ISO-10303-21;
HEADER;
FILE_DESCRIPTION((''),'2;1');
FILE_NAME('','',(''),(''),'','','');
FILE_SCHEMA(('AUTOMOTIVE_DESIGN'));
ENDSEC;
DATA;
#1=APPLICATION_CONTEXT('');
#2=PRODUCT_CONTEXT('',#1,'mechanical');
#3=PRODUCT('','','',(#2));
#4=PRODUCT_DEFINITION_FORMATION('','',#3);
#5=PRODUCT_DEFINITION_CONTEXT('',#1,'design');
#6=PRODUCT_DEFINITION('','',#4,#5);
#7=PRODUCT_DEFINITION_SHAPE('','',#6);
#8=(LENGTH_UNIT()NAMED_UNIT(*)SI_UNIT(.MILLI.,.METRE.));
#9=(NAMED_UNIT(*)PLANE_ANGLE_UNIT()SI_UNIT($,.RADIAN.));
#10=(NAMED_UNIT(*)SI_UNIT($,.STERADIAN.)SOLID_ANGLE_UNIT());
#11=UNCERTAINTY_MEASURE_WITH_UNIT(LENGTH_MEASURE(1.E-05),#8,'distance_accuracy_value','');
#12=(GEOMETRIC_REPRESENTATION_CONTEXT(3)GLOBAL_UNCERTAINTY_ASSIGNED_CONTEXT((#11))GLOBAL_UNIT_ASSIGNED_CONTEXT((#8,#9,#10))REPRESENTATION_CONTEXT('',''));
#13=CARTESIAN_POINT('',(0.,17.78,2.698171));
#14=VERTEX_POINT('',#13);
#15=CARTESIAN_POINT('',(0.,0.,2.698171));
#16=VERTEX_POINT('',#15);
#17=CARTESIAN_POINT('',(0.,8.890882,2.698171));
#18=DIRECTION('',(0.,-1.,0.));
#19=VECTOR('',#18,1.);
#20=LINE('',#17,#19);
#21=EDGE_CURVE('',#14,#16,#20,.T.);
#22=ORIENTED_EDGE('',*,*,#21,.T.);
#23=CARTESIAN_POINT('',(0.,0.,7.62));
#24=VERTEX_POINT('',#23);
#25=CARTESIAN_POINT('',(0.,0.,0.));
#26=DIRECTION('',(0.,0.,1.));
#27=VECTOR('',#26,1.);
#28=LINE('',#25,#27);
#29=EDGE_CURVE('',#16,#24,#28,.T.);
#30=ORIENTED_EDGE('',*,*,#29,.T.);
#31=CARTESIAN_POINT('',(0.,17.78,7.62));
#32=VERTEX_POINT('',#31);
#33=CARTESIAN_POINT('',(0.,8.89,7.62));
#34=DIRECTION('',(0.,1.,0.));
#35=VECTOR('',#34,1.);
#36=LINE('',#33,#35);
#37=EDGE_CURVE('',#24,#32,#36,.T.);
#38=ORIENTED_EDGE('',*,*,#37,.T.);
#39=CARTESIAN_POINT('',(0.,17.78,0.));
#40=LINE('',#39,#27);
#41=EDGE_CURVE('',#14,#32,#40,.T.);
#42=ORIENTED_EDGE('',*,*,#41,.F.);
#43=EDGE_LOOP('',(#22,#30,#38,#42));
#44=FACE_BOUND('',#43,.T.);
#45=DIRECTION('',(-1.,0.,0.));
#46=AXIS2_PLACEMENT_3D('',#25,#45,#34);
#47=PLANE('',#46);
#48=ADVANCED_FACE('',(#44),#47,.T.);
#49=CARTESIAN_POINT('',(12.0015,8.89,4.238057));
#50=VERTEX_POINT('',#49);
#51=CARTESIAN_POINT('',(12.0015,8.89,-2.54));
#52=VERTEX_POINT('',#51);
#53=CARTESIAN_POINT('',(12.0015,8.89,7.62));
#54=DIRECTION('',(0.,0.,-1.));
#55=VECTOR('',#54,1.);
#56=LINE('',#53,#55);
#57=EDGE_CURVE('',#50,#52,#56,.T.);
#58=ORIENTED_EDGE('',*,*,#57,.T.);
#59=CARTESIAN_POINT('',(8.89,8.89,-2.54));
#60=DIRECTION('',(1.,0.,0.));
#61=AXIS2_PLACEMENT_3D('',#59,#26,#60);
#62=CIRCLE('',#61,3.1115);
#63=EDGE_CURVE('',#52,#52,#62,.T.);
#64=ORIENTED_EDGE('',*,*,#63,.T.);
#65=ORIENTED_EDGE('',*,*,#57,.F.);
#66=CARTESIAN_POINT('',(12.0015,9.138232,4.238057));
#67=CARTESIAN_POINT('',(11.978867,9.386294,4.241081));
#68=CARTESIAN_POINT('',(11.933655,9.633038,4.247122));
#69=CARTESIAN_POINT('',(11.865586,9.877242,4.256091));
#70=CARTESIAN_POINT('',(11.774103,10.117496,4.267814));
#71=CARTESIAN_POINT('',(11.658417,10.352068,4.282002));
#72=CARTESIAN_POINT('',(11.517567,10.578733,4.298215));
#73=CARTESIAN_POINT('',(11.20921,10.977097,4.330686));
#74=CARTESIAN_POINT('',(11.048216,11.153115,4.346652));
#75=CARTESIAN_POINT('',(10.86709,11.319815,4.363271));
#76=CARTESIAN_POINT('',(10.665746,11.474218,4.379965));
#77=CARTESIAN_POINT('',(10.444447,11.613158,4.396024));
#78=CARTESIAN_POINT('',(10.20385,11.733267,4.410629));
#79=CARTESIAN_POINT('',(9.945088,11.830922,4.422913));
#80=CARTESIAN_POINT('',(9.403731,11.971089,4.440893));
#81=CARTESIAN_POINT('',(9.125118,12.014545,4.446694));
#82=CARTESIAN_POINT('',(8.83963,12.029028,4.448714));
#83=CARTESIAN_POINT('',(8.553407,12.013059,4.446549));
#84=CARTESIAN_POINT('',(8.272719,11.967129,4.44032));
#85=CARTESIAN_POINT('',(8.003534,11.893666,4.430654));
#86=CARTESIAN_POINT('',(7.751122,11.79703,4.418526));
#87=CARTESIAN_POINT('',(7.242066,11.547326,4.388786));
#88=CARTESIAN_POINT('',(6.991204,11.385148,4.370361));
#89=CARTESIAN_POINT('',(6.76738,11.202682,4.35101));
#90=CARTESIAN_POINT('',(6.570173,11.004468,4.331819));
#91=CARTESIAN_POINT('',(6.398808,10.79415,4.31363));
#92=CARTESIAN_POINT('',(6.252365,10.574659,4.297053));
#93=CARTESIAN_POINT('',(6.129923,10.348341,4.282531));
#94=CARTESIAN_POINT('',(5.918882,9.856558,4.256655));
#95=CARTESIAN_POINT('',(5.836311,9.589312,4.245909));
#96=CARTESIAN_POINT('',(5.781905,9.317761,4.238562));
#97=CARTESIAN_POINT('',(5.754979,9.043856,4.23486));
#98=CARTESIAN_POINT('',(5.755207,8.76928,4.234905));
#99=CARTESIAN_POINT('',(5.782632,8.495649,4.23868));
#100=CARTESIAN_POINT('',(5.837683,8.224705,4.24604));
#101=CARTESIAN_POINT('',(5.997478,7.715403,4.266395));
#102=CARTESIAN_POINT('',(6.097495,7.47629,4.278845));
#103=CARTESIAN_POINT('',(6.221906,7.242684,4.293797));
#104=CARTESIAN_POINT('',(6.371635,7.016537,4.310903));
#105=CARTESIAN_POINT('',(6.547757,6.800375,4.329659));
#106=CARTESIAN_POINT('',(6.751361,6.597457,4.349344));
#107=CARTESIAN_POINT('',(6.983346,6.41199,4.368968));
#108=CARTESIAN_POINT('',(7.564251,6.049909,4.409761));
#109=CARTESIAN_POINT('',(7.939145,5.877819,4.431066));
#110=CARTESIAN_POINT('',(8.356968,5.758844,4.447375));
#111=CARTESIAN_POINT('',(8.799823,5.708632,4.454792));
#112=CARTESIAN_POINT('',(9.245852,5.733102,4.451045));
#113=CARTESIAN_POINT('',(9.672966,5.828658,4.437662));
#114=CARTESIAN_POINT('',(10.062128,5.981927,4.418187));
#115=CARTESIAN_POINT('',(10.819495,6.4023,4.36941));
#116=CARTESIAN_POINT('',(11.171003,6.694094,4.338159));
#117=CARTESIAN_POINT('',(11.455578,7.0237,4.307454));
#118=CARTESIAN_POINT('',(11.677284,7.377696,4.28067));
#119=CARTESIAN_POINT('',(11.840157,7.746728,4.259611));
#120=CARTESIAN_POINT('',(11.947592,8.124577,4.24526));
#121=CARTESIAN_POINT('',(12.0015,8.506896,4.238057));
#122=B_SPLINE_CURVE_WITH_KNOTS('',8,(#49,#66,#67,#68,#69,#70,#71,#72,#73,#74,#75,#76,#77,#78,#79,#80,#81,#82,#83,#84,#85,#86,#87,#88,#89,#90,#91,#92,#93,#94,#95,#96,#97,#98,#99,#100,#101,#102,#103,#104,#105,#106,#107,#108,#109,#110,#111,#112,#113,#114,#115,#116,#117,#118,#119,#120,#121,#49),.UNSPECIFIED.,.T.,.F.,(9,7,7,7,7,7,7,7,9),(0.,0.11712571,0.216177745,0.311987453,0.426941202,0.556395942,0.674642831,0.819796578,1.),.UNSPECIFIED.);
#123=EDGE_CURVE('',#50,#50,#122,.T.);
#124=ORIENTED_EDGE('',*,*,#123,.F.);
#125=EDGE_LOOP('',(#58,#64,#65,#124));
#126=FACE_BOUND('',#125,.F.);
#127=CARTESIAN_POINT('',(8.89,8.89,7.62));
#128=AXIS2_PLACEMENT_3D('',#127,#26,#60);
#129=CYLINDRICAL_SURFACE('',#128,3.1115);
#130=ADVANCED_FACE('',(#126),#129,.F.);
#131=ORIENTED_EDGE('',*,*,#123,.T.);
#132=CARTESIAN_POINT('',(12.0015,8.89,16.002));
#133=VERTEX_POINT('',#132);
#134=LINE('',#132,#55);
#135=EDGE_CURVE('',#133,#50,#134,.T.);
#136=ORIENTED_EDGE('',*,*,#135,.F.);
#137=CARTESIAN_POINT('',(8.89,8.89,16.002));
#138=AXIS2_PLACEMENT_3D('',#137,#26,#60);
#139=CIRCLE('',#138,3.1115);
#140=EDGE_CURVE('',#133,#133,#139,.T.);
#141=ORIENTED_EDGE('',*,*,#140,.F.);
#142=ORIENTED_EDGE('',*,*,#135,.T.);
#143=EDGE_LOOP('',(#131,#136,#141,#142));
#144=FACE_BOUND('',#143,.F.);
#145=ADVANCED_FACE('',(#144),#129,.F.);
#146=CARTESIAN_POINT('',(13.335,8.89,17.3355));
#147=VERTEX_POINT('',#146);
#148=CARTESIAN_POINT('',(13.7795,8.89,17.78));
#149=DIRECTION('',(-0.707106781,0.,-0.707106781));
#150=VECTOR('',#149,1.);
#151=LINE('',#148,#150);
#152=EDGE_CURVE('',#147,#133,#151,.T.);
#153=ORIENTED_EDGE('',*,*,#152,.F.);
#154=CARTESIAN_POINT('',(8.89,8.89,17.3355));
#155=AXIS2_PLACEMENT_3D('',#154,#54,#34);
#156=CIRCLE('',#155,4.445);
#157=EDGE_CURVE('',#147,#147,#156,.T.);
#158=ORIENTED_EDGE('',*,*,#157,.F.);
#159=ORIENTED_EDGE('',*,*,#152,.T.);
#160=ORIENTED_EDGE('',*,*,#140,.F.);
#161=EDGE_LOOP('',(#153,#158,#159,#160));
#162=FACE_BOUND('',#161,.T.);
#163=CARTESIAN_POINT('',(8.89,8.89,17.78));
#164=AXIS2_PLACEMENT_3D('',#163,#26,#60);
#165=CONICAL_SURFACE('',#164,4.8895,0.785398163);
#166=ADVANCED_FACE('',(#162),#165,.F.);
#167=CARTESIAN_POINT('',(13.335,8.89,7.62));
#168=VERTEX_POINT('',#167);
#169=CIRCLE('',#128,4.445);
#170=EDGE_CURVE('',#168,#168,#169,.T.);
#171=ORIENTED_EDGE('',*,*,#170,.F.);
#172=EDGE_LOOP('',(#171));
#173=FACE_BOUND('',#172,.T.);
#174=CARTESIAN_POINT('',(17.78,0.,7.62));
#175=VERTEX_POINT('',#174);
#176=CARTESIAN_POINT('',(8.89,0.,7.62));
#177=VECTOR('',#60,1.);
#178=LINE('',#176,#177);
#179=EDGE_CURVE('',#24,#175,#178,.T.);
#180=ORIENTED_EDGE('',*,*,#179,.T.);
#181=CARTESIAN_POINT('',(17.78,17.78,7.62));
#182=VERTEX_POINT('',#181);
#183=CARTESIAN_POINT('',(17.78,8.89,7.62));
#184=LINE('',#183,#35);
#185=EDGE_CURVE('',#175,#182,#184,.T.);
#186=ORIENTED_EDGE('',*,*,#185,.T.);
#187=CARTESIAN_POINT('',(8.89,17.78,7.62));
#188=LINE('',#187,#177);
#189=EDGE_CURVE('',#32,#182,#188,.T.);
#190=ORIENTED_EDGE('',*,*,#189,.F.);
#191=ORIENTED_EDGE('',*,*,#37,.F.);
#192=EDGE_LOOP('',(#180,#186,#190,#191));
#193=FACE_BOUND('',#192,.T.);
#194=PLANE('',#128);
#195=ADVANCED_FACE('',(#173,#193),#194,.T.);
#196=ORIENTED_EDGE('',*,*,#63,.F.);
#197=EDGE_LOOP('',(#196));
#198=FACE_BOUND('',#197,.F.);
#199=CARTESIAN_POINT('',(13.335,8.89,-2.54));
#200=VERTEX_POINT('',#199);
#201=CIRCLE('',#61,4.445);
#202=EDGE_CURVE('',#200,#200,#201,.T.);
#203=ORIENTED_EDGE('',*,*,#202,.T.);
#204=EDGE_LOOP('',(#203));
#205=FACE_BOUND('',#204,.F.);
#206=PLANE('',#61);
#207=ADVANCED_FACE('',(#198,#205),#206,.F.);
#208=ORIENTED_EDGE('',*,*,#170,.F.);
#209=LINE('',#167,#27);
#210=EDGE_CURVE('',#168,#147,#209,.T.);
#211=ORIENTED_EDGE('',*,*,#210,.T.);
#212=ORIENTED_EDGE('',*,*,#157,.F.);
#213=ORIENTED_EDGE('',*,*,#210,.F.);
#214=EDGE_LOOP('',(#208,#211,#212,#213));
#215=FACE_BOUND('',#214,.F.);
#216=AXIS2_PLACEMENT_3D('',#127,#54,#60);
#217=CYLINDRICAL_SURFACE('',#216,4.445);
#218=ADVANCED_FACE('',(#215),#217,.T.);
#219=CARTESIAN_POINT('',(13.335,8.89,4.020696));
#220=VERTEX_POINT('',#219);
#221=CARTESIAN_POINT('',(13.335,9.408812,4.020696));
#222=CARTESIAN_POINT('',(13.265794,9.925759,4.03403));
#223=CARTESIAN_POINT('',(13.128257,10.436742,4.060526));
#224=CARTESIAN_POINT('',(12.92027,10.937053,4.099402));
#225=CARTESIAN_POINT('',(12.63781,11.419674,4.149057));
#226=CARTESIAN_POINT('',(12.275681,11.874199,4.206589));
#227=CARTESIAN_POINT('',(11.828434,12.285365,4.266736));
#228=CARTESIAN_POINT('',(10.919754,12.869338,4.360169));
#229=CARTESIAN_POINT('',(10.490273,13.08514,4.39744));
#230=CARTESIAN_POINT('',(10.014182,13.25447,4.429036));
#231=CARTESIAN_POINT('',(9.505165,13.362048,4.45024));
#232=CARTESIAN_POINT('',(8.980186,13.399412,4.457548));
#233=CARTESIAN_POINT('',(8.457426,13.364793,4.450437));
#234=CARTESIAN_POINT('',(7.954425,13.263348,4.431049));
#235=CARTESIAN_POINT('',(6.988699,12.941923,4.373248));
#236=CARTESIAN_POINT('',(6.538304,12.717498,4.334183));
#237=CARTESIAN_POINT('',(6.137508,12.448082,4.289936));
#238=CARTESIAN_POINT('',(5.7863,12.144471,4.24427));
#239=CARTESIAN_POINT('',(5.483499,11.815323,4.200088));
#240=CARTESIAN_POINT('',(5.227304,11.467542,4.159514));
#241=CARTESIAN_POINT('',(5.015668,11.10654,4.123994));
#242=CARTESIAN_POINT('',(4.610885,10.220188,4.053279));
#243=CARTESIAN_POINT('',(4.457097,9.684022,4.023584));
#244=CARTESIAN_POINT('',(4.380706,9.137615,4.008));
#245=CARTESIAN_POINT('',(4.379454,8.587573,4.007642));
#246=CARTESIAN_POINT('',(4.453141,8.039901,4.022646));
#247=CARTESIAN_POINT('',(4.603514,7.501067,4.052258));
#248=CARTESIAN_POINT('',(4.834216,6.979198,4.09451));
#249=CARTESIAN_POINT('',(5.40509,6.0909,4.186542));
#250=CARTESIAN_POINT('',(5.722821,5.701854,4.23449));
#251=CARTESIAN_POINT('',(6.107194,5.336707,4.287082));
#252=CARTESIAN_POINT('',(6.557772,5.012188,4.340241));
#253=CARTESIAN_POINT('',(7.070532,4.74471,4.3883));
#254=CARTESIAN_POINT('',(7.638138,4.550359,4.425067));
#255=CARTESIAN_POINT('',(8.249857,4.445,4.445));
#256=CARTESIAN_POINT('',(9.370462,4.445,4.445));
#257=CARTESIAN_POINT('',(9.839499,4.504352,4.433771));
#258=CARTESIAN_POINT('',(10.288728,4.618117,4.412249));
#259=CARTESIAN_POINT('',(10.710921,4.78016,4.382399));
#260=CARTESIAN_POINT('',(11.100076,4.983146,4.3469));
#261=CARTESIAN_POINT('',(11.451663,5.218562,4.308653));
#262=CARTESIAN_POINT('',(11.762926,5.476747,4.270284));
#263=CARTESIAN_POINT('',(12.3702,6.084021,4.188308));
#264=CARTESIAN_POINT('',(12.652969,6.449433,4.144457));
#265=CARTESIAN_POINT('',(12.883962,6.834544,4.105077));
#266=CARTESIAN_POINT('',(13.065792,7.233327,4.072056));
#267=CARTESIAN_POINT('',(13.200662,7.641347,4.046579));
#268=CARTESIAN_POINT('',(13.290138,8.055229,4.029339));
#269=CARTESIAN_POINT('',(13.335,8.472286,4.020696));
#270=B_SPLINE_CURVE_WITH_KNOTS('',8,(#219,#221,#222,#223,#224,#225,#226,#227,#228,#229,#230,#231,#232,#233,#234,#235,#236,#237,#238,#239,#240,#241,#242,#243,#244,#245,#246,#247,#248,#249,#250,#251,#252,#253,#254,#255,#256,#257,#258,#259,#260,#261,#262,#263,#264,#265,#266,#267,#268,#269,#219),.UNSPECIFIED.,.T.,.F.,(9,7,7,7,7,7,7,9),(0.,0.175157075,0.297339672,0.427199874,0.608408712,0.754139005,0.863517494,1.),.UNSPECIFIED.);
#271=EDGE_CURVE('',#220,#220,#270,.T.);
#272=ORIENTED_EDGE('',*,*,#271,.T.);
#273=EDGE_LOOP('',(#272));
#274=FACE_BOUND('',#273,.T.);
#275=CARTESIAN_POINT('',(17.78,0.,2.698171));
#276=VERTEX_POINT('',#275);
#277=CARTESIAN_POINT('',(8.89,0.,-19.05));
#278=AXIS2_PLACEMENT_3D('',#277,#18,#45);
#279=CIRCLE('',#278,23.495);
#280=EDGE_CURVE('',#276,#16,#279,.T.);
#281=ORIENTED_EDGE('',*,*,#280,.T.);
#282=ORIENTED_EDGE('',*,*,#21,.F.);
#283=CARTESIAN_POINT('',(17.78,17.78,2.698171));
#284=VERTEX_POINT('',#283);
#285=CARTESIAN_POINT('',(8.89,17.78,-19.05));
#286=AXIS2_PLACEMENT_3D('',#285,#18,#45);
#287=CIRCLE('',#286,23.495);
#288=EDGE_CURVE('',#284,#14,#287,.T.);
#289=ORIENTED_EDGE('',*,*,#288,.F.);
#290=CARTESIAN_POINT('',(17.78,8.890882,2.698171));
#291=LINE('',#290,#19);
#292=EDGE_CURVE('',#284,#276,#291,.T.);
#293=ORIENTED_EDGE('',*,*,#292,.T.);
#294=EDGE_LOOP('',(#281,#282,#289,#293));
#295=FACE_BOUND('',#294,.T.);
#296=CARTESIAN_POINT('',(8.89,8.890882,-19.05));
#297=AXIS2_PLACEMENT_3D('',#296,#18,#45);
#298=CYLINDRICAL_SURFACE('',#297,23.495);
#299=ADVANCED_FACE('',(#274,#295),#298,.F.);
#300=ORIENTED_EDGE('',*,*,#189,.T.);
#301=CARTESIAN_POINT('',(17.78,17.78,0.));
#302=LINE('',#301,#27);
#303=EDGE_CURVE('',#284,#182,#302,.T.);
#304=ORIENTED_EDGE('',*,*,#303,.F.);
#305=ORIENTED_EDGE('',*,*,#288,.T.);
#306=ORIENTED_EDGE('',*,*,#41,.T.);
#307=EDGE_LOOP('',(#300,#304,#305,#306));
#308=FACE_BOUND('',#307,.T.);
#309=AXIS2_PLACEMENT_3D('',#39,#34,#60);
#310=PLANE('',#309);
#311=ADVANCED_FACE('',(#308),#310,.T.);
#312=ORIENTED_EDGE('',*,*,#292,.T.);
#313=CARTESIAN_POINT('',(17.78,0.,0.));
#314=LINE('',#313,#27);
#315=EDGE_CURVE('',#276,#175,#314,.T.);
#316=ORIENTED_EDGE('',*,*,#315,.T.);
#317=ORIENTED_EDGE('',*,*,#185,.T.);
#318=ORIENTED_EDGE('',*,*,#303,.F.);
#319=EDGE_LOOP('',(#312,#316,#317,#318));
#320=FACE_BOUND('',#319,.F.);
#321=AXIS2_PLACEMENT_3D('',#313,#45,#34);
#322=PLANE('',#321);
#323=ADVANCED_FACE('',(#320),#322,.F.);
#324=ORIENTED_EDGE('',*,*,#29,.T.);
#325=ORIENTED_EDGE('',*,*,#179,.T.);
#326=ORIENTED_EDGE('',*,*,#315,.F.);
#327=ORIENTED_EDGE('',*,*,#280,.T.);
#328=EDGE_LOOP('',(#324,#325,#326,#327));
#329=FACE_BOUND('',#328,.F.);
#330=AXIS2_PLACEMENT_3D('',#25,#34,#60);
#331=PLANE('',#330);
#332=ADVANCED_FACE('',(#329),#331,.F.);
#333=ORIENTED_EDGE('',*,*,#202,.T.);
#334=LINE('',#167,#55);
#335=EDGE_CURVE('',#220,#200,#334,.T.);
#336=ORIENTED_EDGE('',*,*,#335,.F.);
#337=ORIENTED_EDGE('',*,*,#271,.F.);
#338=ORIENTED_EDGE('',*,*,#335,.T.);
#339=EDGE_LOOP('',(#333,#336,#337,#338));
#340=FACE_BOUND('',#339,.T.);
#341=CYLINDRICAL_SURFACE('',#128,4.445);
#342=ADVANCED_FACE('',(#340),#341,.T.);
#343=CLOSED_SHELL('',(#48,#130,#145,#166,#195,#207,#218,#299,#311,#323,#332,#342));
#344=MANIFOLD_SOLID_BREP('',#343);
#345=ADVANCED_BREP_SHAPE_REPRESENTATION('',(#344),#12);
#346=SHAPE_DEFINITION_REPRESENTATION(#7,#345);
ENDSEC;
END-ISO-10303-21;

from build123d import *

# Parameters (mm, degrees)
F0_W     = 17.78
F0_H     = 17.78
F1_DEPTH = 7.62
F3_W     = 5.08
F3_H     = 22.724437993
F5_R     = 4.445
F5_R_2   = 3.1115
F6_DEPTH = 10.16
F7_DEPTH = 25.4
F8_DEPTH = 10.16


# Not quite as in the source:
# - a fillet or chamfer that OpenCascade refuses, or shapes differently, is made with other operations: its cross-section is extruded or revolved along the edge and cut away or added


with BuildPart() as f1:
    # F0 (on Top) → F1 (new body)
    with BuildSketch(Plane.XY):
        with Locations((8.89, 8.89)):
            Rectangle(F0_W, F0_H)
    extrude(amount=F1_DEPTH)

    # F3 (on offset) → F4 (revolve, cut)
    with BuildSketch(Plane(origin=(0, 0, -19.05), x_dir=(1, 0, 0), z_dir=(0, 0, -1))):
        with Locations((-12.065, -8.8908823673)):
            Rectangle(F3_W, F3_H)
    revolve(axis=Axis((8.89, 12.1113763889, -19.05), (0, 1, 0)), mode=Mode.SUBTRACT)

    # F5 (on face) → F6 (join)
    with BuildSketch(Plane.XY.offset(7.62)):
        with Locations((8.89, 8.89)):
            Circle(F5_R)
        with Locations((8.89, 8.89)):
            Circle(F5_R_2, mode=Mode.SUBTRACT)
    extrude(amount=F6_DEPTH)

    # F7 (cut): a face of the model
    f7_faces = [f1.faces().sort_by_distance(p)[0] for p in [
        (8.89, 8.89, 7.62),
    ]]
    extrude(f7_faces, amount=-F7_DEPTH, mode=Mode.SUBTRACT)

    # F5 (on face) → F8 (join)
    with BuildSketch(Plane.XY.offset(7.62)):
        with Locations((8.89, 8.89)):
            Circle(F5_R)
        with Locations((8.89, 8.89)):
            Circle(F5_R_2, mode=Mode.SUBTRACT)
    extrude(amount=-F8_DEPTH)

    # F9: chamfer of 1.778 on 1 edges, made by hand

    # F9_s1 → F9_t2 (revolve, cut)
    with BuildSketch(Plane.XZ.offset(-8.89)):
        Polygon((13.7795, 17.78), (12.0015, 16.002), (12.0015, 17.78), align=None)
    revolve(axis=Axis((8.89, 8.89, 17.78), (0, 0, 1)), mode=Mode.SUBTRACT)


solid = f1.part
